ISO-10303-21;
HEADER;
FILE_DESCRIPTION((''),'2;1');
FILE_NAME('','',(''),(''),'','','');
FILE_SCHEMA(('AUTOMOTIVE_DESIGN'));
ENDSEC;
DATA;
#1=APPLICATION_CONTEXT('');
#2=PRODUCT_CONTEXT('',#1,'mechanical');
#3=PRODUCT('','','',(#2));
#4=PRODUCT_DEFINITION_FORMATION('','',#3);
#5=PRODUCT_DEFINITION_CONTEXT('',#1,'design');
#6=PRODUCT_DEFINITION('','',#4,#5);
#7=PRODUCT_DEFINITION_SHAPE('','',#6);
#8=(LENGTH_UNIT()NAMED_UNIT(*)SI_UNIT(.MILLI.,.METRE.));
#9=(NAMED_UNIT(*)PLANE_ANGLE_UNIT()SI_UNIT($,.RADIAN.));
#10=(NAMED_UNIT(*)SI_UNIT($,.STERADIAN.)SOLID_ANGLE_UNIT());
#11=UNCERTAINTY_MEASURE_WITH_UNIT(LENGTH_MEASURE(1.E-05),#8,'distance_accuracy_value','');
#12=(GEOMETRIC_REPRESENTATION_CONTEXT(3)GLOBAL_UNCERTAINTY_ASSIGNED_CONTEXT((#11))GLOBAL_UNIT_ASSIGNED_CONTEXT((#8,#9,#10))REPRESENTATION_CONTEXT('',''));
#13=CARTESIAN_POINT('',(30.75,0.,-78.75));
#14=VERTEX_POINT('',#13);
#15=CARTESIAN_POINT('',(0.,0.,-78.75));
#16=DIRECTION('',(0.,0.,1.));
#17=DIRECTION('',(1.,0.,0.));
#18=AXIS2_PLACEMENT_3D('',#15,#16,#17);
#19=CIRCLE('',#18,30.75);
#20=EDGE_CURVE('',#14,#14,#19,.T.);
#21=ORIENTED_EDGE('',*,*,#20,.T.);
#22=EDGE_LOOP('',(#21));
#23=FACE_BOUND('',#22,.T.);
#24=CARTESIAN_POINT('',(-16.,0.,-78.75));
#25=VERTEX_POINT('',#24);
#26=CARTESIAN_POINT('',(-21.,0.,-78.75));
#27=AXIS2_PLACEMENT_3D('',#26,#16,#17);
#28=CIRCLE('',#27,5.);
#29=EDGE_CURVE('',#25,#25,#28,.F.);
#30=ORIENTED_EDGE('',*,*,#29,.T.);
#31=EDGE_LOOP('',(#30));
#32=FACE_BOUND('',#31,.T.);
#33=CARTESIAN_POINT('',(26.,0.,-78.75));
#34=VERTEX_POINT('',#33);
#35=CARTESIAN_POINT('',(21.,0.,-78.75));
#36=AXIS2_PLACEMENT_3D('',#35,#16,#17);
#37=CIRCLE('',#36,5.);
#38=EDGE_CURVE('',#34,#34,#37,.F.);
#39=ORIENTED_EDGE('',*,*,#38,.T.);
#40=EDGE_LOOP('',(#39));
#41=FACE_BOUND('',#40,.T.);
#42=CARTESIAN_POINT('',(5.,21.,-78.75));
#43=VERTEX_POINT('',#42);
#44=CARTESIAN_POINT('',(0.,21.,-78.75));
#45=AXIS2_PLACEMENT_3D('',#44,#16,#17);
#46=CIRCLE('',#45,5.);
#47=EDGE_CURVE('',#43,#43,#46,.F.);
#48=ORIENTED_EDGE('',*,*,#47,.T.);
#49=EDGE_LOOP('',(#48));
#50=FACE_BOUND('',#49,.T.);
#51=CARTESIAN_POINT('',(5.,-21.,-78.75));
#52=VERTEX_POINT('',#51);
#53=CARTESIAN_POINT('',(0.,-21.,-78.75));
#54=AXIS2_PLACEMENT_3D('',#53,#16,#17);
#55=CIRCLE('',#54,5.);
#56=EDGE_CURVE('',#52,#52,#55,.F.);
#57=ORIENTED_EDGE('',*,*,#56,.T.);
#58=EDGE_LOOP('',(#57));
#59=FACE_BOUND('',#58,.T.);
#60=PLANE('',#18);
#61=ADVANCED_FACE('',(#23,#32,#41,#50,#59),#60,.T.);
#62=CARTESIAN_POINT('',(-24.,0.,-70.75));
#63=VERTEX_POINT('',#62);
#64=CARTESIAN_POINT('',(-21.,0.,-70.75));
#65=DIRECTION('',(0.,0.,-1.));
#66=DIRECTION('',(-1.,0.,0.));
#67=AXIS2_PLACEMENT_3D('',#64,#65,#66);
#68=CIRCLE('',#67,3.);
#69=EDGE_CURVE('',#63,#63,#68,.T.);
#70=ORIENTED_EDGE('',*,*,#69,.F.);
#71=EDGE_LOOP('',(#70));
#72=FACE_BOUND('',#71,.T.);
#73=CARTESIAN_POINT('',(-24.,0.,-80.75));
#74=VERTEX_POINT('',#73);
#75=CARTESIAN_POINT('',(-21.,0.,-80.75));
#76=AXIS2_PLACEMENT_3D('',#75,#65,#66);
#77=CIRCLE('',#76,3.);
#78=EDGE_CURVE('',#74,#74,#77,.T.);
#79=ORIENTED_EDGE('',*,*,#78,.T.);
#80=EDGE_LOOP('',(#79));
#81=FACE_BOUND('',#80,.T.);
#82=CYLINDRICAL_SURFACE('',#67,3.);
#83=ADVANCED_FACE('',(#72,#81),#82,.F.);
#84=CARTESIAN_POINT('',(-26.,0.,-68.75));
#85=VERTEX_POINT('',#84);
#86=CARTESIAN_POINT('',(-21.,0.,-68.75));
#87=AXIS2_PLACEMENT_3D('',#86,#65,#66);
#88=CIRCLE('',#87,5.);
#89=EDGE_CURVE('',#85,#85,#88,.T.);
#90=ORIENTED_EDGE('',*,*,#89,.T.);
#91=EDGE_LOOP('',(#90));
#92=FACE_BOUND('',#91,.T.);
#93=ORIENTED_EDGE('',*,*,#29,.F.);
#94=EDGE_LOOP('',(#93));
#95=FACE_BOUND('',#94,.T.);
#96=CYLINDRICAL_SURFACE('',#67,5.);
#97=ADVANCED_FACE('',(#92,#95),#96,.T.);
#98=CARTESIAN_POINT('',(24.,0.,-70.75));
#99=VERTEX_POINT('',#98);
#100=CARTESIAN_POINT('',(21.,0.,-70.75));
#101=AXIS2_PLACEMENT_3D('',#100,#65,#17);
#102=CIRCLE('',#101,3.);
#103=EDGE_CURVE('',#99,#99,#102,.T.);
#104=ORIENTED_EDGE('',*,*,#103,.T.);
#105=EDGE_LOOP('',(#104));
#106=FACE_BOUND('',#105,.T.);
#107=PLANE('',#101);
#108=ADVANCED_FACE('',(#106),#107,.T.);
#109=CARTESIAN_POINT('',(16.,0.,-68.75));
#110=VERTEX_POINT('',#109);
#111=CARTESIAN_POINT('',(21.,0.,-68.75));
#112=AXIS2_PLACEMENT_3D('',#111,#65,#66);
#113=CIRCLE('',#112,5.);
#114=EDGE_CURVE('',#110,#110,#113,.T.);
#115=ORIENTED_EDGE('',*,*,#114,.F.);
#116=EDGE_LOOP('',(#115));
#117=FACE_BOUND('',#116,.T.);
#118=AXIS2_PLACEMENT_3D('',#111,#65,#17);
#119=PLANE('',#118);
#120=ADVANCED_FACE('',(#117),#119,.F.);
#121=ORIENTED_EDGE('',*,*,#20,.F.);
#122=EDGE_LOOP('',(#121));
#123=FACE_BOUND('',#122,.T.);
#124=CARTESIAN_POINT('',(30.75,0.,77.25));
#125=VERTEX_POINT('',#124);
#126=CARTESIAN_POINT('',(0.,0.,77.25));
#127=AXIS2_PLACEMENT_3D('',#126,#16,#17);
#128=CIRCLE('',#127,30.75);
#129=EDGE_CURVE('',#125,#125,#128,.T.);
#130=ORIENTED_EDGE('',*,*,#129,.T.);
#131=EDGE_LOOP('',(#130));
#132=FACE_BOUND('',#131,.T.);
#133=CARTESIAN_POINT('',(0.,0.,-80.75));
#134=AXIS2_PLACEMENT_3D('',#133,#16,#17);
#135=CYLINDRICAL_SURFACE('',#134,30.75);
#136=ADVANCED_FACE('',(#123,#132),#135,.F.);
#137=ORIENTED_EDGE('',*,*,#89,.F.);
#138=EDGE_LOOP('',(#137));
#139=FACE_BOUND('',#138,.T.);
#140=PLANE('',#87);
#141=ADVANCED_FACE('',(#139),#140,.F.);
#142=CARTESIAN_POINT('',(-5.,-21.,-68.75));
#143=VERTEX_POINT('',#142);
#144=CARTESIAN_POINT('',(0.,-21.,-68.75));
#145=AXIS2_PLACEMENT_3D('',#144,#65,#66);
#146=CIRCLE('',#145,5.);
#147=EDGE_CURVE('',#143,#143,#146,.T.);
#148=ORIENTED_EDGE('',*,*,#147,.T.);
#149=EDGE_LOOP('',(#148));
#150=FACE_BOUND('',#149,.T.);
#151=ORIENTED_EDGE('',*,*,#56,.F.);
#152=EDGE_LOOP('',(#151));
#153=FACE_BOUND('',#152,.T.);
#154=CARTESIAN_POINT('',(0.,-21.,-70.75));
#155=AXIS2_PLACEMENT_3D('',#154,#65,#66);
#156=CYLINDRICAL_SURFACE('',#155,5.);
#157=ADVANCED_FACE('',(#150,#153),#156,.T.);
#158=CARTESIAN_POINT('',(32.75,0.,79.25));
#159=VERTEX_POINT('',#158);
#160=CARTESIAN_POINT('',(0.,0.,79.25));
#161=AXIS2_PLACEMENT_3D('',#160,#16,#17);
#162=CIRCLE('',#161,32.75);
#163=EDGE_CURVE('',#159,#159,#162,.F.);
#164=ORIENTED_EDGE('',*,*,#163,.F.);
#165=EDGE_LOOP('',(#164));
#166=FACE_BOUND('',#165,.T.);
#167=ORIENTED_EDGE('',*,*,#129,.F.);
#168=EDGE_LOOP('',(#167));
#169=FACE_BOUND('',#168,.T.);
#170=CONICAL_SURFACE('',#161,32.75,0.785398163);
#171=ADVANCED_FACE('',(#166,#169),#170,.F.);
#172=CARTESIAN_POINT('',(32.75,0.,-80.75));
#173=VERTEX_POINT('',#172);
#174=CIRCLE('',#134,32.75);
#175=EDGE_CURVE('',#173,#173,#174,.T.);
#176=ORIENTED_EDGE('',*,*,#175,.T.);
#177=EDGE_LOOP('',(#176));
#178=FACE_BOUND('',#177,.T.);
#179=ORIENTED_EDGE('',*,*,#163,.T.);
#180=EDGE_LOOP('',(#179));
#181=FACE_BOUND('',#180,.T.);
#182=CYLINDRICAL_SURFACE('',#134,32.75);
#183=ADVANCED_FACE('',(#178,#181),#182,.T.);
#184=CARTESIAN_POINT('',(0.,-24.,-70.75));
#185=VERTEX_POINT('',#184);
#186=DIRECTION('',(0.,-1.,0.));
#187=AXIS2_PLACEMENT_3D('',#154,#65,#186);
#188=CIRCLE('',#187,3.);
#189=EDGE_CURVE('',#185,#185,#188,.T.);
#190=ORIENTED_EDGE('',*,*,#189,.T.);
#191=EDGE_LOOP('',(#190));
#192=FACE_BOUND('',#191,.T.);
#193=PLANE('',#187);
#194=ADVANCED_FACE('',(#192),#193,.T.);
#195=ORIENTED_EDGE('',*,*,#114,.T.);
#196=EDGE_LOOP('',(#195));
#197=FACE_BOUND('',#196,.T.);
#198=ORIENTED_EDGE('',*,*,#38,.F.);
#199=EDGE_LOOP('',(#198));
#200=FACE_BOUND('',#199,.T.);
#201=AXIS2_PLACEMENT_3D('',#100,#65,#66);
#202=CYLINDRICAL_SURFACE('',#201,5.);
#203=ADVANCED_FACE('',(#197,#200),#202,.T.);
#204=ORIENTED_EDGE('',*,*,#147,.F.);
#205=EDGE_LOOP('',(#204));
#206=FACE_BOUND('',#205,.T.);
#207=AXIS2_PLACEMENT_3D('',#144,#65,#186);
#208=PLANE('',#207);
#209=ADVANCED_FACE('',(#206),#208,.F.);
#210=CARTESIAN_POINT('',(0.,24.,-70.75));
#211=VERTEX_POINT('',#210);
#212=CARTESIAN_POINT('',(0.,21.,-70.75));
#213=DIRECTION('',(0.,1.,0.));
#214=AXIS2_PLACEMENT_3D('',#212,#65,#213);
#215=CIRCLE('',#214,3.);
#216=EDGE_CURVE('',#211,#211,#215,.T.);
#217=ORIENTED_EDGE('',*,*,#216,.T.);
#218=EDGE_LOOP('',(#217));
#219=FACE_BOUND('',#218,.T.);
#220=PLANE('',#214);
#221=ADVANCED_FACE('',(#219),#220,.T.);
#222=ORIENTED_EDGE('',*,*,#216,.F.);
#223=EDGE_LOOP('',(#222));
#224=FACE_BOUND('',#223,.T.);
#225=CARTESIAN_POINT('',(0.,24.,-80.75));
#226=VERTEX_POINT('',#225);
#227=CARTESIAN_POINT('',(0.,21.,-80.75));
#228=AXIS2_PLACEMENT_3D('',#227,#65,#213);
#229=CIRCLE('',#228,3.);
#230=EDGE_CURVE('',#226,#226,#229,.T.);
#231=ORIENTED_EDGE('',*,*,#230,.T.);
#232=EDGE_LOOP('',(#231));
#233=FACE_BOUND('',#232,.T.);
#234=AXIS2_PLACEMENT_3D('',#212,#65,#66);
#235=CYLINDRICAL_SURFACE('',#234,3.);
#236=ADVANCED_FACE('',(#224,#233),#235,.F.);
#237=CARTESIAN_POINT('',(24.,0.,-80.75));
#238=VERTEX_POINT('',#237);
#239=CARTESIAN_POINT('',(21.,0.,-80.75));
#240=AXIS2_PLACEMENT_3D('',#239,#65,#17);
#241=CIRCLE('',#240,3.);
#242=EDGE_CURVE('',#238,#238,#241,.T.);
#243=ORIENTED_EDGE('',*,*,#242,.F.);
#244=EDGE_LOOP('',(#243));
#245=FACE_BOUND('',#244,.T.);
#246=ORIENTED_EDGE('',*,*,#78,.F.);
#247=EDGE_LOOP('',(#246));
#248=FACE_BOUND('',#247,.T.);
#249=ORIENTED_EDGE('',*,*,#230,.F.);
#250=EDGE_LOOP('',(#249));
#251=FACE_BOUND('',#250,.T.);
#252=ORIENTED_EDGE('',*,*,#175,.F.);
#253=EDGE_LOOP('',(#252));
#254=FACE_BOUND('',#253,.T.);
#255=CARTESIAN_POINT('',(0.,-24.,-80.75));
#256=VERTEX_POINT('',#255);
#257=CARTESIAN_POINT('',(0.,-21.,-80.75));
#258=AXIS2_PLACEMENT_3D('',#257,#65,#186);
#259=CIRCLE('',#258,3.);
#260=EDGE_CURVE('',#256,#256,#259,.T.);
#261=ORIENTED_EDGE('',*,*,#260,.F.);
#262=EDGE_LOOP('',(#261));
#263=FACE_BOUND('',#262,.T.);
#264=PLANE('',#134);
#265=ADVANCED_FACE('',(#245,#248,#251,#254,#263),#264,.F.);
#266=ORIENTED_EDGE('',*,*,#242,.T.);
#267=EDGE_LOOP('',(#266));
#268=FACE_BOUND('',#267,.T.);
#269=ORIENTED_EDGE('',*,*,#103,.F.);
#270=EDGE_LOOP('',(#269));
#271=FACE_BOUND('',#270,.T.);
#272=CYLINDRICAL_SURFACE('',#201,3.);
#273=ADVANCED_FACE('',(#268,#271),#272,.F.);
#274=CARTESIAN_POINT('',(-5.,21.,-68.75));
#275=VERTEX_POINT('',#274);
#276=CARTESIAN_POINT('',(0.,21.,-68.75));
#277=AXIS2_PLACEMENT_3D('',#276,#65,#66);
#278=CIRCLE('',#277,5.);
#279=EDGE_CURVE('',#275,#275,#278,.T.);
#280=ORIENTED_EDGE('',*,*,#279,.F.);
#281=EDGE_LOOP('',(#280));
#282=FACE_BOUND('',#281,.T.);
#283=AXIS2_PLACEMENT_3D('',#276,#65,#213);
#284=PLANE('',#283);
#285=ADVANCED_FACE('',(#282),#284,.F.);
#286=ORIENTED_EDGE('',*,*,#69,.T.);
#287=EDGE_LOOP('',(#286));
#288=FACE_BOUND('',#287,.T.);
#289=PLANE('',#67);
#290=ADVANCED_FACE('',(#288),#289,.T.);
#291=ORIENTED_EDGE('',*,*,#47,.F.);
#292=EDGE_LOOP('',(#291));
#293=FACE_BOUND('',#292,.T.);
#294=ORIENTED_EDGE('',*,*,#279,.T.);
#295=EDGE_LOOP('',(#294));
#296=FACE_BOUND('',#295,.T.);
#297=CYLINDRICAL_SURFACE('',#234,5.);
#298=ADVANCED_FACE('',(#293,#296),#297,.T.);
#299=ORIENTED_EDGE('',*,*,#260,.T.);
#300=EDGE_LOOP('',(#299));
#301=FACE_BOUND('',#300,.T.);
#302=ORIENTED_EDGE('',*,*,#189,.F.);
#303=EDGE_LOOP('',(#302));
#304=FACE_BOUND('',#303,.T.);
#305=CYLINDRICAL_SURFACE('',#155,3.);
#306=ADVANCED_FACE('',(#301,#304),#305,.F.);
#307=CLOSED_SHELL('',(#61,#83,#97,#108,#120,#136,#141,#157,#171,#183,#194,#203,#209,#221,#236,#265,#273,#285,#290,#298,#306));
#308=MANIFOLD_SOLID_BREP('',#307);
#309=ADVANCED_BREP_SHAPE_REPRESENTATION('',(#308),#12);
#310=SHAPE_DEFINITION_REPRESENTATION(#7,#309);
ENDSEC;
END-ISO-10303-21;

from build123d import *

# Parameters (mm, degrees)
SKETCH1_R           = 32.75
BOSS_EXTRUDE1_DEPTH = 80.75
SKETCH12_R          = 6
BOSS_EXTRUDE5_DEPTH = 63
SKETCH14_R          = 3
CUT_EXTRUDE2_DEPTH  = 10
CIRPATTERN2_COUNT   = 4
CUT_EXTRUDE5_START  = -1.5
SKETCH17_R          = 50
CUT_EXTRUDE5_DEPTH  = 170.510044343
SHELL1_T            = -2
CHAMFER2_SIZE       = 2


with BuildPart() as part:
    # Sketch1 → Boss-Extrude1 (new, symmetric)
    with BuildSketch(Plane.XY):
        Circle(SKETCH1_R)
    extrude(amount=BOSS_EXTRUDE1_DEPTH, both=True)

    # Sketch10 → Revolve1 (revolve)
    with BuildSketch(Plane(origin=(0, 0, 0), x_dir=(0, 0, -1), z_dir=(1, 0, 0)), mode=Mode.PRIVATE) as revolve1_sk:
        Polygon((-97.75, 0), (-97.75, 14), (-80.75, 19), (-80.75, 0), align=None)
    revolve(revolve1_sk.sketch.rotate(Axis((0, 0, 1000), (0, 0, -1)), 90), axis=Axis((0, 0, 1000), (0, 0, -1)))

    # Sketch12 → Boss-Extrude5 (add)
    with BuildSketch(Plane.XY.offset(97.75)):
        Circle(SKETCH12_R)
    extrude(amount=BOSS_EXTRUDE5_DEPTH)

    # Sketch14 → Cut-Extrude2 (cut)
    with BuildSketch(Plane(origin=(0, 0, -80.75), x_dir=(-1, 0, 0), z_dir=(0, 0, -1))):
        with Locations((21, 0)):
            Circle(SKETCH14_R)
    cut_extrude2 = extrude(amount=-CUT_EXTRUDE2_DEPTH, mode=Mode.SUBTRACT)

    # CirPattern2: Cut-Extrude2 ×4 about axis
    cirpattern2_axis = Axis((0, 0, 0), (0, 0, 1))
    for i in range(1, CIRPATTERN2_COUNT):
        add(cut_extrude2.rotate(cirpattern2_axis, i * 360 / CIRPATTERN2_COUNT), mode=Mode.SUBTRACT)

    # Sketch17 → Cut-Extrude5 (cut, through all)
    with BuildSketch(Plane.XY.offset(80.75).offset(CUT_EXTRUDE5_START)):
        Circle(SKETCH17_R)
    extrude(amount=CUT_EXTRUDE5_DEPTH, mode=Mode.SUBTRACT)

    # Shell1
    shell1_openings = [part.faces().sort_by_distance(p)[0] for p in [
        (0, 0, 79.25),
    ]]
    offset(amount=SHELL1_T, openings=shell1_openings, kind=Kind.INTERSECTION)

    # Chamfer2
    chamfer2_edges = [part.edges().sort_by_distance(p)[0] for p in [
        (-30.75, 0, 79.25),
    ]]
    chamfer(chamfer2_edges, length=CHAMFER2_SIZE - 0.0001)  # a hair under: the kernel refuses the full size


solid = part.part
